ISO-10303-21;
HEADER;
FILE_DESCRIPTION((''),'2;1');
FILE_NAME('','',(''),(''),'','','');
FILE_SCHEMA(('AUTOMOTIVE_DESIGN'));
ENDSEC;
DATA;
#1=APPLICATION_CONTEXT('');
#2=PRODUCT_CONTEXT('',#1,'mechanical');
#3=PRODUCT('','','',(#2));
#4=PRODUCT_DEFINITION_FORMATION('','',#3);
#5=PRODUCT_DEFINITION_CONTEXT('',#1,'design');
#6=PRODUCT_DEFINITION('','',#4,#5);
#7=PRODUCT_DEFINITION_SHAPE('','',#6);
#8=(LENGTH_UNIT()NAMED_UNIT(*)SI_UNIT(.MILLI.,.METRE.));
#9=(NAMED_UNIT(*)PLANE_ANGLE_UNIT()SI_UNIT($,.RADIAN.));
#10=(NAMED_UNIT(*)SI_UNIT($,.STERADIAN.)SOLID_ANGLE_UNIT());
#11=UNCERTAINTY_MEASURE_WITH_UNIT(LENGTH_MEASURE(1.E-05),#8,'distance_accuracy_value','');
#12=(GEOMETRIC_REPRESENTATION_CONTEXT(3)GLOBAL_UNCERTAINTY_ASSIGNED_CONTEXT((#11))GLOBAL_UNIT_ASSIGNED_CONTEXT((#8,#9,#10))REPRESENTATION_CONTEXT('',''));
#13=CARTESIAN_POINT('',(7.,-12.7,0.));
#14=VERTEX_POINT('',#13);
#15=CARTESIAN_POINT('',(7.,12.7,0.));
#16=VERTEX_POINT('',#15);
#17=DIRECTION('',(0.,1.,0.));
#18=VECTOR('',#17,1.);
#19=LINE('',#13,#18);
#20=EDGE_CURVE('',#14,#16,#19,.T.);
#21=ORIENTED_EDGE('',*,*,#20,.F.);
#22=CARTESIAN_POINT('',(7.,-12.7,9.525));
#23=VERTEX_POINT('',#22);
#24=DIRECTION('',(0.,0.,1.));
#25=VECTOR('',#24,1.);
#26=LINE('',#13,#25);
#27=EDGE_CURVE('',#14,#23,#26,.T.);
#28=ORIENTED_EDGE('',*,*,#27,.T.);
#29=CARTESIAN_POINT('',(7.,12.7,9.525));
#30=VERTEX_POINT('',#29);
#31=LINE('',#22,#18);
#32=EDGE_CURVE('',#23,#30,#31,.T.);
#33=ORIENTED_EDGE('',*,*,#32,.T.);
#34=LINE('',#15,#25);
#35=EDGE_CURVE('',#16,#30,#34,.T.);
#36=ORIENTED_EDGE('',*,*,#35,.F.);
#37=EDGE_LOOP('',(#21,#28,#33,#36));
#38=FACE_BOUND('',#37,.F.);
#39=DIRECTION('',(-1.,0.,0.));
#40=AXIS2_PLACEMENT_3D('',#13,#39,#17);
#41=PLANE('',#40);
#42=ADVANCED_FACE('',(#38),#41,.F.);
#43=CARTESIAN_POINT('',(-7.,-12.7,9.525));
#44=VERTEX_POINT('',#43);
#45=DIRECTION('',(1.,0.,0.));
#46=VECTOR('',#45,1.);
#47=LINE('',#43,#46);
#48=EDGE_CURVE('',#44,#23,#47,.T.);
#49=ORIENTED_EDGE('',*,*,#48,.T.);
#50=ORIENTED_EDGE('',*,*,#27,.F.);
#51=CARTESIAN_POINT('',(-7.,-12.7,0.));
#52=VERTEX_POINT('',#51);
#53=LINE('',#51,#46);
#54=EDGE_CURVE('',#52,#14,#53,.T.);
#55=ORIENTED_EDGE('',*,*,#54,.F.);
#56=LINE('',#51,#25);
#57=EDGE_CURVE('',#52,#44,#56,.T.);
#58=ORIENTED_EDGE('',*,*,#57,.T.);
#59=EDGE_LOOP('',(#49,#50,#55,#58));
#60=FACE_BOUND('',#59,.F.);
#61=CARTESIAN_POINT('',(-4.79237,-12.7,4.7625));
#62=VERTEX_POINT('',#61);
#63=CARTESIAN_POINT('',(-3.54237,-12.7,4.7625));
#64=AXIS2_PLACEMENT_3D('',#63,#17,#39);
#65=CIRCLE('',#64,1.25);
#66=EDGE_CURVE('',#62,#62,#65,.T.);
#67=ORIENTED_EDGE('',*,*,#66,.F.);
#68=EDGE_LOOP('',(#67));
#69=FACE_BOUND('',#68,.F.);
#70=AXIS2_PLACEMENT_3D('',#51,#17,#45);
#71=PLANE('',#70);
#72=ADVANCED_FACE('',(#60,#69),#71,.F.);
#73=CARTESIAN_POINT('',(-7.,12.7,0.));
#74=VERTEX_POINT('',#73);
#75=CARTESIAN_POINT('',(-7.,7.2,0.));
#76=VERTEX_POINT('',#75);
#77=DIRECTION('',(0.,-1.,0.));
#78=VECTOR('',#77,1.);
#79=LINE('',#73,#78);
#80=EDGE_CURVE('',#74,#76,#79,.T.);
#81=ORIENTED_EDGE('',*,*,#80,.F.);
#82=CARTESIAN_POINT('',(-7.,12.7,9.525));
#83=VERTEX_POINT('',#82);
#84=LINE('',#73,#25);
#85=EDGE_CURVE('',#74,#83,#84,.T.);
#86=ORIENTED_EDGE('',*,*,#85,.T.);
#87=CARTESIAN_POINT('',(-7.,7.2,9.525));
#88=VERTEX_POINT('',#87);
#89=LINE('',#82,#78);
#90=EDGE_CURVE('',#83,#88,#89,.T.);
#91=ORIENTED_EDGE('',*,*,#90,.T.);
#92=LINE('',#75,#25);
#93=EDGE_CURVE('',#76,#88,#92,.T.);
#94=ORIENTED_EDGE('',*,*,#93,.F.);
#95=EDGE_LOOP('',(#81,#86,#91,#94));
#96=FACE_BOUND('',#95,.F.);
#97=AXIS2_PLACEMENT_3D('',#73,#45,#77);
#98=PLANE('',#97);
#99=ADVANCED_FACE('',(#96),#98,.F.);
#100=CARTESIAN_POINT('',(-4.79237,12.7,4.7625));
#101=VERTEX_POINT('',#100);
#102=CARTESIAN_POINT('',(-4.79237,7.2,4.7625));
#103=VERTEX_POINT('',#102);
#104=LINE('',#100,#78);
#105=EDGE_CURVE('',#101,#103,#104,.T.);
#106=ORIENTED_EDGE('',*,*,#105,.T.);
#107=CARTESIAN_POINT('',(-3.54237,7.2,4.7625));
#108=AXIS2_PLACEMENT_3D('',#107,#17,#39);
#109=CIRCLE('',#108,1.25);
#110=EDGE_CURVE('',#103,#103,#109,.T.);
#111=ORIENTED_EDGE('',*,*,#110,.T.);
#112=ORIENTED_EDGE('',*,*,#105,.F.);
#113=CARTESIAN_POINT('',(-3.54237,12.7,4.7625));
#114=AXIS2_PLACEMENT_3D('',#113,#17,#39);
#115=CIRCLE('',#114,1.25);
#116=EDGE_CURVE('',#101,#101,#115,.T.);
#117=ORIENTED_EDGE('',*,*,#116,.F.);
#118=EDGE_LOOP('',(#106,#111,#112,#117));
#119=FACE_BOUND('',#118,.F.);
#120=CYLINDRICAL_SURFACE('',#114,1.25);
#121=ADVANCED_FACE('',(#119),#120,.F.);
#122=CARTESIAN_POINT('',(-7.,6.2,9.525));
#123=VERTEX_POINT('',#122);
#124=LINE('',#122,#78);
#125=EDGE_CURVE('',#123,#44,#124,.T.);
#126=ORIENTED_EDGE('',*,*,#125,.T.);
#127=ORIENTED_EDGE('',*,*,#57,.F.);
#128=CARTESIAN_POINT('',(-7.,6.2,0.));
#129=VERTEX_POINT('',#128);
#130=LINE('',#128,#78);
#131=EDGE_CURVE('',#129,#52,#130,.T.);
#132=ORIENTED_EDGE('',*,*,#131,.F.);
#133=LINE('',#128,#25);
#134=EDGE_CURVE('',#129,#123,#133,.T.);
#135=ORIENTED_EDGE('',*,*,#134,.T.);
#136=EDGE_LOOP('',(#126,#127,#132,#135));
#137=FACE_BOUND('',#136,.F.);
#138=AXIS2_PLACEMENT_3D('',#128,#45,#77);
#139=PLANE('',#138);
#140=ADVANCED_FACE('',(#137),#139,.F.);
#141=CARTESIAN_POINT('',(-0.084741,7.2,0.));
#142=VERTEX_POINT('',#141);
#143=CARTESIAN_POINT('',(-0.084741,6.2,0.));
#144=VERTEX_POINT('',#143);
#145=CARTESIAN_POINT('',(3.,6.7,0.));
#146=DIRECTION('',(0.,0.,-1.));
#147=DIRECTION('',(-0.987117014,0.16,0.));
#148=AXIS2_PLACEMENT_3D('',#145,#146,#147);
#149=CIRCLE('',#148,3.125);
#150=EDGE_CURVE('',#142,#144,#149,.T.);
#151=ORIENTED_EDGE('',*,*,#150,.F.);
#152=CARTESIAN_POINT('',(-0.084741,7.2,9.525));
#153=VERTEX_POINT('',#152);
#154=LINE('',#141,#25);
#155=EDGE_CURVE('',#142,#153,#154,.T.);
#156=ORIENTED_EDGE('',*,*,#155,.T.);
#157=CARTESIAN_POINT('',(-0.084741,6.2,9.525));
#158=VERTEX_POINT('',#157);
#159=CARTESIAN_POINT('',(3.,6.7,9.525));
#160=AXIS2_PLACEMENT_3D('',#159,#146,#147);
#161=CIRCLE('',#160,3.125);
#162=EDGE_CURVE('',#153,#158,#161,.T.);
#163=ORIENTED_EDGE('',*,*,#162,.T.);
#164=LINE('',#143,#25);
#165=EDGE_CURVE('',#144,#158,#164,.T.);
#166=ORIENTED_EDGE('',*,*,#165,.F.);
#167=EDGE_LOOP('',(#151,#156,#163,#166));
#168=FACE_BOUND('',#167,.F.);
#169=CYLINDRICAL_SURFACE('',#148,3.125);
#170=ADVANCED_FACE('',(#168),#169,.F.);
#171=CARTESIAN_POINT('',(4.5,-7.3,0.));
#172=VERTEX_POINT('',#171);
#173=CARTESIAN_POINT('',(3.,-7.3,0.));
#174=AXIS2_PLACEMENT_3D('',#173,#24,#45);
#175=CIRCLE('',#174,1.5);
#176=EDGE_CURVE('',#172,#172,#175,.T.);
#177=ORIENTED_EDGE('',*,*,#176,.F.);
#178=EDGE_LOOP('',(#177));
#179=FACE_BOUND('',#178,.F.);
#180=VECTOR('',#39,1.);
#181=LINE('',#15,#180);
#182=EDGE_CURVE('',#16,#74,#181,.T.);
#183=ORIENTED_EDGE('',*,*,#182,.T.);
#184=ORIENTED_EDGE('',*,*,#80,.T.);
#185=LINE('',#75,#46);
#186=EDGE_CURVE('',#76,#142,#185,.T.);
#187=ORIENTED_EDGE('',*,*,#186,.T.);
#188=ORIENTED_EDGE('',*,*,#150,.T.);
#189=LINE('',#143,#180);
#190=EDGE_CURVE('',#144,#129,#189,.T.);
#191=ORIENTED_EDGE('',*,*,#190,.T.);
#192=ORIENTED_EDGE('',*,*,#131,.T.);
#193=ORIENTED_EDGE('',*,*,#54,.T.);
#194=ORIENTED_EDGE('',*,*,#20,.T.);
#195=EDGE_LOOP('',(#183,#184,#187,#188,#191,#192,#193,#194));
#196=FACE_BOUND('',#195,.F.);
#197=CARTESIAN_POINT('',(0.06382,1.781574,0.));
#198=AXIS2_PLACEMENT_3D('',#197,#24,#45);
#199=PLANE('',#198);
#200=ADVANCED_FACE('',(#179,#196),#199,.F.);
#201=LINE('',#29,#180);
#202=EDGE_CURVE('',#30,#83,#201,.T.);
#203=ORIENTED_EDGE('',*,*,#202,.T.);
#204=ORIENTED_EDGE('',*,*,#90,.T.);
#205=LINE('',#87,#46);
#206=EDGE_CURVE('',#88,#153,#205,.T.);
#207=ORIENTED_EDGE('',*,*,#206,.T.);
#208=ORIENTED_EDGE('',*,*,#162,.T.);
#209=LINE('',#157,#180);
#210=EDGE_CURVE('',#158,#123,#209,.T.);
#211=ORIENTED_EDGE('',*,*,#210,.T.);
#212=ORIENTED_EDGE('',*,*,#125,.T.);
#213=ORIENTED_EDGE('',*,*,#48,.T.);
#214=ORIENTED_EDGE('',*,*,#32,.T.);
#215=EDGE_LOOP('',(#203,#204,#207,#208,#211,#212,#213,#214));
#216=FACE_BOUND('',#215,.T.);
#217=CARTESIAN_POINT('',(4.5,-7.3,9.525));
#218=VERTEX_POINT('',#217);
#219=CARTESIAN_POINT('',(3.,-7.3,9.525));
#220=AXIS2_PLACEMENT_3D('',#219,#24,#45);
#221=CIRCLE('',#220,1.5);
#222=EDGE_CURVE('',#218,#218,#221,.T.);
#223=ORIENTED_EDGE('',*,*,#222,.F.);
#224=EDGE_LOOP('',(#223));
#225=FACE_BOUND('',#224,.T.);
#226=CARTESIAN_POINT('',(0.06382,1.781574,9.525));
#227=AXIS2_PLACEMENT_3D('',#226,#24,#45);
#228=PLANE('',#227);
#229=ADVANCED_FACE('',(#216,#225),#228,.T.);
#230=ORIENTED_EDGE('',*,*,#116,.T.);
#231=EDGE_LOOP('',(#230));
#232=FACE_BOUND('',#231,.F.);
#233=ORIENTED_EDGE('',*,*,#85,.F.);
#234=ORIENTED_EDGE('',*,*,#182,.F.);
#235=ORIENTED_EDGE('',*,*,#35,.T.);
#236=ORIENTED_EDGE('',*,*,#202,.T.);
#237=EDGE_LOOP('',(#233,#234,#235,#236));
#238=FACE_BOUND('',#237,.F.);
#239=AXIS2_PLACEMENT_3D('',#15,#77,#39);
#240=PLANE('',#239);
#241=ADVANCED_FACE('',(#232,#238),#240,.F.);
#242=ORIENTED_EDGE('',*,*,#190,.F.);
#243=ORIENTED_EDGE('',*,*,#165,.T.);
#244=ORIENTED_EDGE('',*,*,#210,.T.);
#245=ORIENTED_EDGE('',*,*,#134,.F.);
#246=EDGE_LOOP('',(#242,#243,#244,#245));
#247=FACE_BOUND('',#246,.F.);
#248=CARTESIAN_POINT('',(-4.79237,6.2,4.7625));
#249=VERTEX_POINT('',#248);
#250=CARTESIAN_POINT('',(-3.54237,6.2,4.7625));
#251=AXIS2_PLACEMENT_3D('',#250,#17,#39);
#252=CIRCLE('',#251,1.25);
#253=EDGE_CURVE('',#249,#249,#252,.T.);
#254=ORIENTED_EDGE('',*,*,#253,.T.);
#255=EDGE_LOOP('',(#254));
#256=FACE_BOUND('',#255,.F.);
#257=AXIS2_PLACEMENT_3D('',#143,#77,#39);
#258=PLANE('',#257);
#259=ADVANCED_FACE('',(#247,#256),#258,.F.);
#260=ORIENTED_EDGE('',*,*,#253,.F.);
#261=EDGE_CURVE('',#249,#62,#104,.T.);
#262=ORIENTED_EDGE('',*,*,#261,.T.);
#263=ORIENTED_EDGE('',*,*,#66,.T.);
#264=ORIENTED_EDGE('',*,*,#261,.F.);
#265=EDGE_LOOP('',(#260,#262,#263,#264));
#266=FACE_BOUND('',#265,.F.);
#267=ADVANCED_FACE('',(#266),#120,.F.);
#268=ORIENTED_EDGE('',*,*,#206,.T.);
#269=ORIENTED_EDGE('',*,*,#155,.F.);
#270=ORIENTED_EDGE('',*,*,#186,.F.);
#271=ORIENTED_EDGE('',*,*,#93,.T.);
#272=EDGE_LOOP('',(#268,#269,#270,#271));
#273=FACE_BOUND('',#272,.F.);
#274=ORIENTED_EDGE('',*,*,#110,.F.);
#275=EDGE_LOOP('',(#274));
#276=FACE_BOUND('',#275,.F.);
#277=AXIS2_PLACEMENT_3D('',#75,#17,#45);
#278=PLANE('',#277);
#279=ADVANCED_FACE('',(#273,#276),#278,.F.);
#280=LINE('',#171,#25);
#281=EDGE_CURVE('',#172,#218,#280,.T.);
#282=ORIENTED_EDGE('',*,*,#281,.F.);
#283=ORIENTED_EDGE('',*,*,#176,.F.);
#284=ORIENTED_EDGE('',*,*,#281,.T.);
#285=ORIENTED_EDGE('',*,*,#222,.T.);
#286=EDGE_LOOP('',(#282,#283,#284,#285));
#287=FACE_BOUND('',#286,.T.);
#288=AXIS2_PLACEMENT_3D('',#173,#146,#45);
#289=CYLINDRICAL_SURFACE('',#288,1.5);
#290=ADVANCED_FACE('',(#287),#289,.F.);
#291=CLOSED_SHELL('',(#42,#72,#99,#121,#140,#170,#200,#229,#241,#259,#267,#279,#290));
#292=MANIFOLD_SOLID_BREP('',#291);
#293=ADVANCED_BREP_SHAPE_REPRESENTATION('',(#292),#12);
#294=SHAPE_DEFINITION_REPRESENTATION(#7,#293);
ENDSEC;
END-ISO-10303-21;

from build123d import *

# Parameters (mm, degrees)
F0_R     = 1.5
F1_DEPTH = 9.525
F2_R     = 1.25
F3_DEPTH = 25.401


# Not quite as in the source:
# - a length typed as a fraction of an inch, garbled in the dataset ("3 / 203.2 mm" for 3/8 in), is restored


with BuildPart() as f1:
    # F0 (on Top) → F1 (new body)
    with BuildSketch(Plane.XY):
        with BuildLine():
            Line((-7, -12.7), (7, -12.7))
            Line((7, -12.7), (7, 12.7))
            Line((7, 12.7), (-7, 12.7))
            Line((-7, 12.7), (-7, 7.2))
            Line((-7, 7.2), (-0.0847406698, 7.2))
            ThreePointArc((-0.0847406698, 7.2), (6.125, 6.7), (-0.0847406698, 6.2))
            Line((-0.0847406698, 6.2), (-7, 6.2))
            Line((-7, 6.2), (-7, -12.7))
        make_face()
        with Locations((3, -7.3)):
            Circle(F0_R, mode=Mode.SUBTRACT)
    extrude(amount=F1_DEPTH)

    # F2 (on face) → F3 (cut, through all)
    with BuildSketch(Plane(origin=(0, 12.7, 0), x_dir=(-1, 0, 0), z_dir=(0, 1, 0))):
        with Locations((3.5423703349, 4.7625)):
            Circle(F2_R)
    extrude(amount=-F3_DEPTH, mode=Mode.SUBTRACT)


solid = f1.part
